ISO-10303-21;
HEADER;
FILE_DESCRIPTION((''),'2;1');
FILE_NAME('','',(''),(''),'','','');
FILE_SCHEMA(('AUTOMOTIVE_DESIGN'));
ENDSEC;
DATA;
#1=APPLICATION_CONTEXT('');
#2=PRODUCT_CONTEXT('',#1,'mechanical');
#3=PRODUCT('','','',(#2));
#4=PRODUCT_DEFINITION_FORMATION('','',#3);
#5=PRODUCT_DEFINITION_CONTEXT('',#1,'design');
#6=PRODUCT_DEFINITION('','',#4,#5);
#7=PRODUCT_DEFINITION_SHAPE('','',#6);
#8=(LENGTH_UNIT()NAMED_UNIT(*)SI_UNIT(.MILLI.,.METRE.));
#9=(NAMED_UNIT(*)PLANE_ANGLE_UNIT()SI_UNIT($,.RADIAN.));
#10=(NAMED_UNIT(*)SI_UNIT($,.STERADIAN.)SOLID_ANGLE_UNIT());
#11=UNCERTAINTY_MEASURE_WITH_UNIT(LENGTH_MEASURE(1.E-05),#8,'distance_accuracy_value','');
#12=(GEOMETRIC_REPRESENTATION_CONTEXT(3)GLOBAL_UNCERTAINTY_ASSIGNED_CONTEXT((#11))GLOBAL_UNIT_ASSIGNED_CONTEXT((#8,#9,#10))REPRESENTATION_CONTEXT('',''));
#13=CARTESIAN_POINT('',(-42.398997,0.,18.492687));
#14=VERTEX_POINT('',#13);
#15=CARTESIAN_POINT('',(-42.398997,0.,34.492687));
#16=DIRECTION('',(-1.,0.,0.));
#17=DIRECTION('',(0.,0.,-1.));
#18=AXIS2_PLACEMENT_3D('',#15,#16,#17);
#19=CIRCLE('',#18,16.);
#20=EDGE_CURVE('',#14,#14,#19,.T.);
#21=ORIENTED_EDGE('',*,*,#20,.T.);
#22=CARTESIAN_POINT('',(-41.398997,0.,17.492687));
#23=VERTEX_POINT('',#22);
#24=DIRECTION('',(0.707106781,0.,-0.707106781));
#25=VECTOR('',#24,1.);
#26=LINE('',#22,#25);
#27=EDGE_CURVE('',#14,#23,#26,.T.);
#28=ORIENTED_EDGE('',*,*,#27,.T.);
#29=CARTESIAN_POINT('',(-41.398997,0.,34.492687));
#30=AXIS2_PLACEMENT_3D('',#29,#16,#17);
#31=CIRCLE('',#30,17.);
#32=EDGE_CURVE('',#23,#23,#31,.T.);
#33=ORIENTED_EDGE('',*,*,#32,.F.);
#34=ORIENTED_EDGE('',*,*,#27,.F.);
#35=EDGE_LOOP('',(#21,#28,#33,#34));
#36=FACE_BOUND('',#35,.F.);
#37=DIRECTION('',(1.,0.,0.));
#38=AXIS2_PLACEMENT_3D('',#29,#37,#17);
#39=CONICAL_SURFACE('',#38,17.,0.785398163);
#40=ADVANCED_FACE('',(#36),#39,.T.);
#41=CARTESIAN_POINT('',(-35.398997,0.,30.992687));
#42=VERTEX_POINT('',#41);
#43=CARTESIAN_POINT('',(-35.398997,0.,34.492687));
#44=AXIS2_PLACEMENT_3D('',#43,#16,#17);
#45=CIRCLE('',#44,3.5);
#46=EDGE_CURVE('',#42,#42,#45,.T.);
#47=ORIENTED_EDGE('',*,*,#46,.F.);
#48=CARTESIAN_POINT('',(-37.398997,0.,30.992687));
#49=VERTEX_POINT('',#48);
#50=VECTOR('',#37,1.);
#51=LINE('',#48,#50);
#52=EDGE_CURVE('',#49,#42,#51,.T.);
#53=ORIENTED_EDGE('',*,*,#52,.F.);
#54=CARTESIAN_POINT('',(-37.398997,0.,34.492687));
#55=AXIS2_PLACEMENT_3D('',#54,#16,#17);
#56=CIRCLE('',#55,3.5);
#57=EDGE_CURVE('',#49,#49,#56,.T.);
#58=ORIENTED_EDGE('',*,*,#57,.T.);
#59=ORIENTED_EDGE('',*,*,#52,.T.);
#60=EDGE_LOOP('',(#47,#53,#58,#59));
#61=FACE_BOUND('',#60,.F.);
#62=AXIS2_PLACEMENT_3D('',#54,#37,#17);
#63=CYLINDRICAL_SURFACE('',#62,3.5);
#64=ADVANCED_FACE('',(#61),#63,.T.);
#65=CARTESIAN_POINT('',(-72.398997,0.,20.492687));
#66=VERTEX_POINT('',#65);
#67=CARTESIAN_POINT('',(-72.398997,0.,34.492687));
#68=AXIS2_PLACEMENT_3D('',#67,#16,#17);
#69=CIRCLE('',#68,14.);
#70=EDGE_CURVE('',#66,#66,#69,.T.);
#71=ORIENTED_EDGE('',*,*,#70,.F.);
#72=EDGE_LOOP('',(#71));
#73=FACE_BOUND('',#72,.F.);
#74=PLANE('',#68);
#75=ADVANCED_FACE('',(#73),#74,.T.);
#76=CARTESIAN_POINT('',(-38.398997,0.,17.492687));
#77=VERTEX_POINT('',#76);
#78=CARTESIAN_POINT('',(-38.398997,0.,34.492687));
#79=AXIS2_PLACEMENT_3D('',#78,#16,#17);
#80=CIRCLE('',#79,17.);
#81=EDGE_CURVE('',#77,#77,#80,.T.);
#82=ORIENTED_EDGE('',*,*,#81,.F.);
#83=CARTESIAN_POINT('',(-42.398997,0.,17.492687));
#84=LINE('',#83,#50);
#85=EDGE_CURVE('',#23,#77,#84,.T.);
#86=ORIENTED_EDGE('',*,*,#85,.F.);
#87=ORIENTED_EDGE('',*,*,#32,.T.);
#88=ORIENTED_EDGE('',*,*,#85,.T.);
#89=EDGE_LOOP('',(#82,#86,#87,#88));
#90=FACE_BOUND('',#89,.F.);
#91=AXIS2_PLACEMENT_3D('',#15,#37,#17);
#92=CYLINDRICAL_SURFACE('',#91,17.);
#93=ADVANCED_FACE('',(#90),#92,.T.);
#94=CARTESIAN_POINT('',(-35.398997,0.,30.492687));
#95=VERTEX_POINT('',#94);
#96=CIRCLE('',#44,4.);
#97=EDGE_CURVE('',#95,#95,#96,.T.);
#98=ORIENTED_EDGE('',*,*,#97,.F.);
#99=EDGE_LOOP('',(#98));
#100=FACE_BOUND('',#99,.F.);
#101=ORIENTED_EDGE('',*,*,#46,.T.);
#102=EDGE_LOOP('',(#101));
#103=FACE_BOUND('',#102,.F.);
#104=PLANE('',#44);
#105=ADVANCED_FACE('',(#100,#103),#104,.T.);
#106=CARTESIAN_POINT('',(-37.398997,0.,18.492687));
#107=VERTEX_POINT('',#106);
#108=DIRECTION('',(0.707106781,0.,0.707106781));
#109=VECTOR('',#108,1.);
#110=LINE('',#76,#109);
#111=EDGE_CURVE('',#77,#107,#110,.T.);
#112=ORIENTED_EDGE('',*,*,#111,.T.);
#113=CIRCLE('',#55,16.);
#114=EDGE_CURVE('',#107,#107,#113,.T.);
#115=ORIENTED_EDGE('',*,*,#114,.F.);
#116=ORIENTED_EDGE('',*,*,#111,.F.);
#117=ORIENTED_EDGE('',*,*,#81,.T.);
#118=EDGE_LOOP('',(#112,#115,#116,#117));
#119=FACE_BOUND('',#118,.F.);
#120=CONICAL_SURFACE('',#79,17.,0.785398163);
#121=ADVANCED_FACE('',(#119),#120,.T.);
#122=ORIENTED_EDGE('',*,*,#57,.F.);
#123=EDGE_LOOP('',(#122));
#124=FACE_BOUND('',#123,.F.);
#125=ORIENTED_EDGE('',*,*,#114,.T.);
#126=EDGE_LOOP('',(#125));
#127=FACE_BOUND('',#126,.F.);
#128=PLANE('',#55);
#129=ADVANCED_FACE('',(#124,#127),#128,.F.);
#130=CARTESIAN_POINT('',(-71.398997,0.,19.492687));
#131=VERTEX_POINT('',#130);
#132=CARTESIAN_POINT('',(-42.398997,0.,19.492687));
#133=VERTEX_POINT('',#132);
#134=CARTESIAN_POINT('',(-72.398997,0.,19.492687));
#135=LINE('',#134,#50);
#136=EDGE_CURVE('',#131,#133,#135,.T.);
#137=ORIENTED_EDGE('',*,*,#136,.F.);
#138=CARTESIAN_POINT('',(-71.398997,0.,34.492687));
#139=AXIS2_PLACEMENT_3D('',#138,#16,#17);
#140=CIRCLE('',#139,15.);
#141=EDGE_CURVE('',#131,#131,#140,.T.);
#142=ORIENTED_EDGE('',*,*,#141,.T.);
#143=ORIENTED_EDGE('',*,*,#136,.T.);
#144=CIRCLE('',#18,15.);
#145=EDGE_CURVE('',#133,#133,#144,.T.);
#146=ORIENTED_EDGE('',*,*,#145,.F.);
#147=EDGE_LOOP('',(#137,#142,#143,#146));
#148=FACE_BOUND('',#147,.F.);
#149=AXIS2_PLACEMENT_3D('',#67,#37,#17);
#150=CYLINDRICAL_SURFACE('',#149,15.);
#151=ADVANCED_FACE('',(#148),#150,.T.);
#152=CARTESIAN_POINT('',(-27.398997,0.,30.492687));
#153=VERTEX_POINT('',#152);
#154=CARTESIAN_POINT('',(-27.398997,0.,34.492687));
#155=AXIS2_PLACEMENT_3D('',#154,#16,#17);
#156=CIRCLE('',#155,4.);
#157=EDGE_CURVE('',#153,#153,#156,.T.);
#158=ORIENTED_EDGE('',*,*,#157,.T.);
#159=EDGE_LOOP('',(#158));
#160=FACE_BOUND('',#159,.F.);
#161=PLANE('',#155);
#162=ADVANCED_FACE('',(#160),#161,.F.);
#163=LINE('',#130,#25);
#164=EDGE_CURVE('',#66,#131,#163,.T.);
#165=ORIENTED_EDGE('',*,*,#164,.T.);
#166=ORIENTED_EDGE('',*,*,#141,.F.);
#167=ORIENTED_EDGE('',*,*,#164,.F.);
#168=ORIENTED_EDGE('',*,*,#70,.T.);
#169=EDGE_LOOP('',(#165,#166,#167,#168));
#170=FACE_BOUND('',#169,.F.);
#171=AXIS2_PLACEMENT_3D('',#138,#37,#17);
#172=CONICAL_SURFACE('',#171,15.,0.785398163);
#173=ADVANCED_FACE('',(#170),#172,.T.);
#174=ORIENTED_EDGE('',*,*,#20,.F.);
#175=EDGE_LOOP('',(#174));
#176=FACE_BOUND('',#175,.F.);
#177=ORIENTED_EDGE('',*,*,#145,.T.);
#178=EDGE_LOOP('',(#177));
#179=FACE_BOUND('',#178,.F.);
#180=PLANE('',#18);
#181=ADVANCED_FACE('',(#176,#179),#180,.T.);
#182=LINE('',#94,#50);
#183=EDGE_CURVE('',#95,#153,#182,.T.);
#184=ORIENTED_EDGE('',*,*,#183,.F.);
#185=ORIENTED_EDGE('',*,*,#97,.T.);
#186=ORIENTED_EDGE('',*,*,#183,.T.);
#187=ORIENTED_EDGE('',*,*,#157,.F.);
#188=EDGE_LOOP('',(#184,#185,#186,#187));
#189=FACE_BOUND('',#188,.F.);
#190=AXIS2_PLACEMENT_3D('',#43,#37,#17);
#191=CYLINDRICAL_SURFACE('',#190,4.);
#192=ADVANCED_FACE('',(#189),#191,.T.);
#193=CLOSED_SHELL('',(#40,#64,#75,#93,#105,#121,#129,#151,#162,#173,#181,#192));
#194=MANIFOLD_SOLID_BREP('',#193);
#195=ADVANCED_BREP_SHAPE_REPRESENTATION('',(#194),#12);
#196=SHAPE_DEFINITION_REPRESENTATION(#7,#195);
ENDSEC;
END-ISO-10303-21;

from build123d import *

# Parameters (mm, degrees)
F2_SIZE = 1


with BuildPart() as f1:
    # F0 (on Front) → F1 (revolve)
    with BuildSketch(Plane.XZ):
        Polygon((-72.3989970755, 34.4926873816), (-72.3989970755, 19.4926873816), (-42.3989970755, 19.4926873816), (-42.3989970755, 17.4926873816), (-37.3989970755, 17.4926873816), (-37.3989970755, 30.4926873816), (-37.3989970755, 30.9926873816), (-35.3989970755, 30.9926873816), (-35.3989970755, 30.4926873816), (-27.3989970755, 30.4926873816), (-27.3989970755, 34.4926873816), align=None)
    revolve(axis=Axis((-49.8989970755, 0, 34.4926873816), (-1, 0, 0)))

    # F2
    f2_edges = [f1.edges().sort_by_distance(p)[0] for p in [
        (-37.398997, 0, 51.492687),
        (-42.398997, 0, 51.492687),
        (-72.398997, 0, 49.492687),
    ]]
    chamfer(f2_edges, length=F2_SIZE)


solid = f1.part
